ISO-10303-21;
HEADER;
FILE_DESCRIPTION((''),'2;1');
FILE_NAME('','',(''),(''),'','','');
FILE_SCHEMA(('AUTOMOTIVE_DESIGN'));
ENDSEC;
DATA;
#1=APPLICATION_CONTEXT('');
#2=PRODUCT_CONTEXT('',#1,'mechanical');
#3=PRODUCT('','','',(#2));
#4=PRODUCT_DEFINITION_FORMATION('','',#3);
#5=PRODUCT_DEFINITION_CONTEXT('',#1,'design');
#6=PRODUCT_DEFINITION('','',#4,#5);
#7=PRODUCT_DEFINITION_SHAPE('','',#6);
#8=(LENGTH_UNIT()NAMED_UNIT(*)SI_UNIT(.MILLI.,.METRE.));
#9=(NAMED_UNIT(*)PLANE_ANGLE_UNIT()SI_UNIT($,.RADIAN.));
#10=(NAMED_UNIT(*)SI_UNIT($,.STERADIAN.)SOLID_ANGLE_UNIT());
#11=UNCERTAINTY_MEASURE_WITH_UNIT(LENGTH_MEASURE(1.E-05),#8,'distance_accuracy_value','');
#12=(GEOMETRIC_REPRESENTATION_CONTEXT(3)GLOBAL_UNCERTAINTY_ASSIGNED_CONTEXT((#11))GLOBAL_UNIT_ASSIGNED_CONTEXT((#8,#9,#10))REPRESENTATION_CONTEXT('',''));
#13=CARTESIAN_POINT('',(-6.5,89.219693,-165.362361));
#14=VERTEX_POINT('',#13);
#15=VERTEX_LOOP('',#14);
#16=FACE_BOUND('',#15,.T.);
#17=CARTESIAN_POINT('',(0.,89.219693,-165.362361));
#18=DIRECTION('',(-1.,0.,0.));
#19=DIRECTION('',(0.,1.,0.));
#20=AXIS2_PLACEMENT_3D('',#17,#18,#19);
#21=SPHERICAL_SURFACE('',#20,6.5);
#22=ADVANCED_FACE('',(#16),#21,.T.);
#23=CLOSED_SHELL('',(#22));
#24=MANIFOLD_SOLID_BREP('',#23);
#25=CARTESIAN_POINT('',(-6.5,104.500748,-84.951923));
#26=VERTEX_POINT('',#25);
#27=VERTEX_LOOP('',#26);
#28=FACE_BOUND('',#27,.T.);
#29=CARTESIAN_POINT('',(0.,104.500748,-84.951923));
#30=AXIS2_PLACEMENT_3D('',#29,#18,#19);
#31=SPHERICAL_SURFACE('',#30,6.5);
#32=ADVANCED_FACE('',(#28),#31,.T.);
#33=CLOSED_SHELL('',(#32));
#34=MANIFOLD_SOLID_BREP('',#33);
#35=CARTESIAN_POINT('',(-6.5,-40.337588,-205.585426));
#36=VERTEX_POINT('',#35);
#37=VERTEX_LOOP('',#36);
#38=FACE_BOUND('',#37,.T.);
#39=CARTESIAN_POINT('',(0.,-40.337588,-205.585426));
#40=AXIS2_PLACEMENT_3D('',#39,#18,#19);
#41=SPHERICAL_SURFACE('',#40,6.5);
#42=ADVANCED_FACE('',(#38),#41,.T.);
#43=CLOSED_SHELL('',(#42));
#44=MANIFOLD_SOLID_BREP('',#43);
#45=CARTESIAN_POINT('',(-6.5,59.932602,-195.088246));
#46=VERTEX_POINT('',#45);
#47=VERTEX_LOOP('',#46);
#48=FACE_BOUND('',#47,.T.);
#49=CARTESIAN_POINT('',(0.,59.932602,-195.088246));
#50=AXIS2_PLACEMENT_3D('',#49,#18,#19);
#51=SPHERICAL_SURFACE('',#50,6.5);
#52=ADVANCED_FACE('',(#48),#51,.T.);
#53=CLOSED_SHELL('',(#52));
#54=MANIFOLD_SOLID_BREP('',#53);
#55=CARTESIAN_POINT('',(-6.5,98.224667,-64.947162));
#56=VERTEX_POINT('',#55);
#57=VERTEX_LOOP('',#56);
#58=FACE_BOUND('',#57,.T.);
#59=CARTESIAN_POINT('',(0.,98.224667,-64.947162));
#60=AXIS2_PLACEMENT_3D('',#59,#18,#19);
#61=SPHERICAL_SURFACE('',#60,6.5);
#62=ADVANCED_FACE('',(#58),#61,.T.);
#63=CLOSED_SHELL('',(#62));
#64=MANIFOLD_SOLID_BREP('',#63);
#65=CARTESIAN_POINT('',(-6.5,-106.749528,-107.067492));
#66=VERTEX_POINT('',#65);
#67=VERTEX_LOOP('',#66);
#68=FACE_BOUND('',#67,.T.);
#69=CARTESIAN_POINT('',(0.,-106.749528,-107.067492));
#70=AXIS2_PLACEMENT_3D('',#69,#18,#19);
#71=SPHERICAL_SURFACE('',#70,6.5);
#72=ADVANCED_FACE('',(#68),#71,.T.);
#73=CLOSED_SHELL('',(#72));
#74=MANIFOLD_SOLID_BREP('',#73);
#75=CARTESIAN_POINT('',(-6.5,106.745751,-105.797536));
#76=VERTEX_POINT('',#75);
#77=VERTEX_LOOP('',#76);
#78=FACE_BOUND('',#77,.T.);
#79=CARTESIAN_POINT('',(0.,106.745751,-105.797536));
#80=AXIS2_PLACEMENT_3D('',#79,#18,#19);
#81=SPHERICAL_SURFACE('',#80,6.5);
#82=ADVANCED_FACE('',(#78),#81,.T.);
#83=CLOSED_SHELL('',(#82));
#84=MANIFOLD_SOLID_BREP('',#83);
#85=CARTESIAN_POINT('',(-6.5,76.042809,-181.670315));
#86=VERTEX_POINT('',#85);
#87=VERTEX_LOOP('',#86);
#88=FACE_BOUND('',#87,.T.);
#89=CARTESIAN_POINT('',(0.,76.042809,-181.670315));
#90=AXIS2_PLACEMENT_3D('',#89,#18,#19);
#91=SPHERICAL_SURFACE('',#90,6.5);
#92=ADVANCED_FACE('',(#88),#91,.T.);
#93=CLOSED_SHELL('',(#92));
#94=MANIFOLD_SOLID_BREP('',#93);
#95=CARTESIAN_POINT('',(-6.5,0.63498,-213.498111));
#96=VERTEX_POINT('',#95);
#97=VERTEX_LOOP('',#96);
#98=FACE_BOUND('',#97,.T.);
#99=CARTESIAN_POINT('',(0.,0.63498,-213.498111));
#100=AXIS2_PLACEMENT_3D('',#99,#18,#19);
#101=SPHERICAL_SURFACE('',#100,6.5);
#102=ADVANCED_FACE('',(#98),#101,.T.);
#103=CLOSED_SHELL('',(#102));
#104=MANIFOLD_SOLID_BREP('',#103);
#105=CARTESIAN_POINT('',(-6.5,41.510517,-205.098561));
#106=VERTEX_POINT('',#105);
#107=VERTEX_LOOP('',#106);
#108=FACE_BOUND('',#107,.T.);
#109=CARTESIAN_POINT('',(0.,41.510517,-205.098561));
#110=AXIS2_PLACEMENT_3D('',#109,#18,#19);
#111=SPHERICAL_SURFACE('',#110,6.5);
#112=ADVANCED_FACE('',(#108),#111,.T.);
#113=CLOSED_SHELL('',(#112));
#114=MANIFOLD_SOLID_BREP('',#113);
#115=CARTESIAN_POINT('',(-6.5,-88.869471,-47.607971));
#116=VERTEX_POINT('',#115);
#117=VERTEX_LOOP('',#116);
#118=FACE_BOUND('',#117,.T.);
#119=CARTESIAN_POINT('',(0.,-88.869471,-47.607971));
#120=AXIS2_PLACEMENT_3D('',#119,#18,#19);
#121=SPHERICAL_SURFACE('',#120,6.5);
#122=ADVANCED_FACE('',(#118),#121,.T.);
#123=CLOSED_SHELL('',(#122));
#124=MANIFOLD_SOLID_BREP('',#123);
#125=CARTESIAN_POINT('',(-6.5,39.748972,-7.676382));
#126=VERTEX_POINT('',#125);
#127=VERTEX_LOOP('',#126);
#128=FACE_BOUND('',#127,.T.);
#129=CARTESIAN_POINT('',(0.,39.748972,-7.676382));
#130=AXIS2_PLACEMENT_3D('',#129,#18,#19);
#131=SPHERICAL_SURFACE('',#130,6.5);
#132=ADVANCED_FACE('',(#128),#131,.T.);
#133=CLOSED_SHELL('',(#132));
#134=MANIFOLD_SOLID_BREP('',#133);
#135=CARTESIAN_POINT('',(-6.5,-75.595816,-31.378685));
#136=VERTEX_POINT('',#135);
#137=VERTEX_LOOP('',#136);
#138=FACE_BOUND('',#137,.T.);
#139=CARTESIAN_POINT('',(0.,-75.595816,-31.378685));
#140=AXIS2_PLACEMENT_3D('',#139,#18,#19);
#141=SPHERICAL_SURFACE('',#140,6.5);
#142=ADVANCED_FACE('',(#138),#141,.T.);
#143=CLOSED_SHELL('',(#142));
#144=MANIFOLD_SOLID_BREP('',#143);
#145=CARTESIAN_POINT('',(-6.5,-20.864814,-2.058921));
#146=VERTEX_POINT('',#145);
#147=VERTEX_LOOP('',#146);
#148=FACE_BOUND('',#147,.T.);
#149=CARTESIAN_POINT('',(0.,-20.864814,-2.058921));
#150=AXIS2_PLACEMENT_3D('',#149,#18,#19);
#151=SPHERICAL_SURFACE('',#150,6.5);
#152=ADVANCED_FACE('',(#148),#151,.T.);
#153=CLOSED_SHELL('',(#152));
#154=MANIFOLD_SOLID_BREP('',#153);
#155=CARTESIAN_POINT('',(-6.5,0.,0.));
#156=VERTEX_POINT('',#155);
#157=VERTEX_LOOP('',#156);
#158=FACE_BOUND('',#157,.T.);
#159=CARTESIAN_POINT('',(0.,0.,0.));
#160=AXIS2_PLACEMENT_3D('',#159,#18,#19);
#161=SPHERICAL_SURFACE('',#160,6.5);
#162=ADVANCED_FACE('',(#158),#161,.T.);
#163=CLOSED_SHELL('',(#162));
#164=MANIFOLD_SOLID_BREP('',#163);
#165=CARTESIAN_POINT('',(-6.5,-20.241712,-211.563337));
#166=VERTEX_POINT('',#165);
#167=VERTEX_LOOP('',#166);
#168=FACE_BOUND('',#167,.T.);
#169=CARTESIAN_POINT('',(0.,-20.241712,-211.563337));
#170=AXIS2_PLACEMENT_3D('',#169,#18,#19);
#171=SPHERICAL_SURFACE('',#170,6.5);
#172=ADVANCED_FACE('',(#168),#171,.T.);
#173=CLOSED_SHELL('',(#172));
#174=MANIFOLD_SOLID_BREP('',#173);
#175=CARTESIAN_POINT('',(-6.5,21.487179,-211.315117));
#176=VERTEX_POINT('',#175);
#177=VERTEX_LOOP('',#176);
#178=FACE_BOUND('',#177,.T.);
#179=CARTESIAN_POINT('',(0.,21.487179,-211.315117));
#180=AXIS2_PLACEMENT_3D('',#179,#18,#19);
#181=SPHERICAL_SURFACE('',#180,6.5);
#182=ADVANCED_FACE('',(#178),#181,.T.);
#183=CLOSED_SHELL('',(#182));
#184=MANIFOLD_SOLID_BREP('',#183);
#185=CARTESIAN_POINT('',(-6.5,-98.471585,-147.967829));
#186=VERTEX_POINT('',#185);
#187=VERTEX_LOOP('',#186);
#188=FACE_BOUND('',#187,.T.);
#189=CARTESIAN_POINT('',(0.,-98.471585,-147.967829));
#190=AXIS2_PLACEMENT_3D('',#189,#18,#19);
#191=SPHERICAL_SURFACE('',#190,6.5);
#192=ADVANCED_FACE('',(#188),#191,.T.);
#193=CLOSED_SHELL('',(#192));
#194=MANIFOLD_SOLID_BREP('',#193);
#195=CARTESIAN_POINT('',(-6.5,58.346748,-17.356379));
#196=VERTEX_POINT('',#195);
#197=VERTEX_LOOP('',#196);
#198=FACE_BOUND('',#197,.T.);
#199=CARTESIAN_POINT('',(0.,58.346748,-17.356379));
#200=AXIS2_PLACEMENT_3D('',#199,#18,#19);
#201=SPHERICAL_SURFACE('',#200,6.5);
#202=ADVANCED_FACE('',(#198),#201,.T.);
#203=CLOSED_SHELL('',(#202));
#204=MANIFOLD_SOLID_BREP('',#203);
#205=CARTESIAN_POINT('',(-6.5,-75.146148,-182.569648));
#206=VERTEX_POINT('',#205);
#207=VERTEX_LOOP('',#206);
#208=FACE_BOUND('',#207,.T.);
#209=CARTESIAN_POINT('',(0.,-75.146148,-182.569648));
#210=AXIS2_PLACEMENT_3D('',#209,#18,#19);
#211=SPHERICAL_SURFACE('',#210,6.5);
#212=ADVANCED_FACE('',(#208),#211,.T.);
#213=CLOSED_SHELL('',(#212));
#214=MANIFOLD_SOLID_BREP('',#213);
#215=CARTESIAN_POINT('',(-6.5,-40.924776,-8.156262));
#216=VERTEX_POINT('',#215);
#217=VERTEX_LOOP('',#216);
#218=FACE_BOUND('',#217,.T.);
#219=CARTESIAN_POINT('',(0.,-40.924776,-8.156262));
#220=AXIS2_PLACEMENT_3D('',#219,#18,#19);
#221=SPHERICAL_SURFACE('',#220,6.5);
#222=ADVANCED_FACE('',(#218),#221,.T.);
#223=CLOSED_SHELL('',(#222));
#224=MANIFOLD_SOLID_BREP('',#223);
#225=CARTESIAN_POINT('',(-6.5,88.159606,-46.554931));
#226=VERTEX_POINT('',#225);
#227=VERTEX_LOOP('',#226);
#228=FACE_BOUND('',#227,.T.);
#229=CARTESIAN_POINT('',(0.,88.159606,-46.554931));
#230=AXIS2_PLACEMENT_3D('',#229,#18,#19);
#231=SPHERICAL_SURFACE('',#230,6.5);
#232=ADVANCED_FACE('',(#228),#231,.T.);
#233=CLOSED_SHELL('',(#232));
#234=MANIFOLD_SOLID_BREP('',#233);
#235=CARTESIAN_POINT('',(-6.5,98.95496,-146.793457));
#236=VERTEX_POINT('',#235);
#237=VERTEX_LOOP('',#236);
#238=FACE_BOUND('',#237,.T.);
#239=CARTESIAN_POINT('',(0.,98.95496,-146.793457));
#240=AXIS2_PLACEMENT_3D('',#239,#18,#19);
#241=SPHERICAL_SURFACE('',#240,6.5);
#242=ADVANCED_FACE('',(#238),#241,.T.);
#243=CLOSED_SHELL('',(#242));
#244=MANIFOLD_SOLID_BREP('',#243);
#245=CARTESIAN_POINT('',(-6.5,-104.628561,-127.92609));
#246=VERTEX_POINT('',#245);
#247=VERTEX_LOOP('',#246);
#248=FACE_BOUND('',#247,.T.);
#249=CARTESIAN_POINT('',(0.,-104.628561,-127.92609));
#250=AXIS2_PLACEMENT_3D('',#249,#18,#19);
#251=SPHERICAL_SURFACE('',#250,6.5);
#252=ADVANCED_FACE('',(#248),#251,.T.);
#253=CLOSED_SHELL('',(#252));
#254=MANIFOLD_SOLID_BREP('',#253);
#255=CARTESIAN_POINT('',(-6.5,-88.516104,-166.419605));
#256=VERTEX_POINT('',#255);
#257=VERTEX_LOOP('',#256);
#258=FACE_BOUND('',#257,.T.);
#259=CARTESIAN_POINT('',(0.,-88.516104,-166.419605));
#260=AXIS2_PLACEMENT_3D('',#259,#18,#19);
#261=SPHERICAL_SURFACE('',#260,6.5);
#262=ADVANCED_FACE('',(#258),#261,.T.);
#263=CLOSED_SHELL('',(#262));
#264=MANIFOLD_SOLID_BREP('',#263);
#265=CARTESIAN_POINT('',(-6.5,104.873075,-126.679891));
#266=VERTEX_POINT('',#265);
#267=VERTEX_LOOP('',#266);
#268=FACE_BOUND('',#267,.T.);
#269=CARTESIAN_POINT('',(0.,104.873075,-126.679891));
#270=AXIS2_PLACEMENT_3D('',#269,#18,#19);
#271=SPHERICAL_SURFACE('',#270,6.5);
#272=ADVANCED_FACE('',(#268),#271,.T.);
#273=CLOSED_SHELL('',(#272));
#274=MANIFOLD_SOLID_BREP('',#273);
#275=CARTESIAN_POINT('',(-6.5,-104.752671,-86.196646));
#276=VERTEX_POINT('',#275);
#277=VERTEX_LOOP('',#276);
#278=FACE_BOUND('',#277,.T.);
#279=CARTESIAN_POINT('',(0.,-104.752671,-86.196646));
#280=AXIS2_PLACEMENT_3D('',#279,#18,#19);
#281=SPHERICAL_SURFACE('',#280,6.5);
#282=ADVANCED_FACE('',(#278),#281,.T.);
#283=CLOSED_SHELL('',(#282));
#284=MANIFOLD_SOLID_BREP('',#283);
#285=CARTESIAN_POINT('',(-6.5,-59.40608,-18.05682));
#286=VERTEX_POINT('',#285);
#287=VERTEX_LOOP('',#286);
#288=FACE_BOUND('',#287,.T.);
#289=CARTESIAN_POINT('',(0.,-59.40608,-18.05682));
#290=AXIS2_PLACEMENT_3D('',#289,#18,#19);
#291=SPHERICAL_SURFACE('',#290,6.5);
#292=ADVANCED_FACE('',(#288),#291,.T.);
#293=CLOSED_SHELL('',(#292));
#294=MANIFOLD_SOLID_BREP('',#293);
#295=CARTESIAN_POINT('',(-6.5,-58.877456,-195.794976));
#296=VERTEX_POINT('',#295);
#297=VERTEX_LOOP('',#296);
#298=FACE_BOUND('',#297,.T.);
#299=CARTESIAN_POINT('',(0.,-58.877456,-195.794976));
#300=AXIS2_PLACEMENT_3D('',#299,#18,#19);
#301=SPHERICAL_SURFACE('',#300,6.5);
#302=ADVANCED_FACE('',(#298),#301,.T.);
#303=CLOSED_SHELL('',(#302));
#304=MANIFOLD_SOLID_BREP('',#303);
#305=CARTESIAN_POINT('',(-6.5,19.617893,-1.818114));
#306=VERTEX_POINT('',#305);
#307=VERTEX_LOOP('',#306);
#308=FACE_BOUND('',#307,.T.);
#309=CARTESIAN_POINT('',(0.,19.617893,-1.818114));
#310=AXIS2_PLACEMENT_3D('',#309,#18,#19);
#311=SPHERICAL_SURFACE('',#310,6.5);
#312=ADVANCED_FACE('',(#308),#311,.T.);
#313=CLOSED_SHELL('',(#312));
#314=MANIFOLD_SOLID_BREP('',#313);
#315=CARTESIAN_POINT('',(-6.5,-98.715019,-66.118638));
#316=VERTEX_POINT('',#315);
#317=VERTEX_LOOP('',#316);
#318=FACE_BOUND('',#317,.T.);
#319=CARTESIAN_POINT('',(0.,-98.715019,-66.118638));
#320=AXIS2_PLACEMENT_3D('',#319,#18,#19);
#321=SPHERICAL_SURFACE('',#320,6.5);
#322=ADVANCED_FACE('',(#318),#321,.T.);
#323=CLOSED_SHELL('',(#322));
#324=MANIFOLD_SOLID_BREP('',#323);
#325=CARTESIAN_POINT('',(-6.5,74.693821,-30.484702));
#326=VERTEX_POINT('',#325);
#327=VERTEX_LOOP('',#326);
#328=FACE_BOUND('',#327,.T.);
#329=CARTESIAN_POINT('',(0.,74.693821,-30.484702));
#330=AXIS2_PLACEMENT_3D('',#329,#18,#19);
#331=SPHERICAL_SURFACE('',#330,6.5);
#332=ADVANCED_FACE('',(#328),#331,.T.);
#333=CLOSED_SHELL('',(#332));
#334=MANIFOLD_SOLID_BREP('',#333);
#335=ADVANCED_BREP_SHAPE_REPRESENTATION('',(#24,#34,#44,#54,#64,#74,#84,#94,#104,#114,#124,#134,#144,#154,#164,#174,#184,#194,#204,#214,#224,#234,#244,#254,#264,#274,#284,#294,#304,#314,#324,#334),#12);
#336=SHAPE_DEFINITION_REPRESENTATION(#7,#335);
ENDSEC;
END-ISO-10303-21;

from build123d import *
from build123d.topology import SkipClean


with BuildPart() as part:
    # Sketch1 → Revolve1 (revolve)
    with SkipClean():  # the faces are left unmerged after this step: merging them gives an invalid solid
        with BuildSketch(Plane.XY):
            with BuildLine():
                ThreePointArc((6.5, 0), (0, 6.5), (-6.5, 0))
                Line((-6.5, 0), (6.5, 0))
            make_face()
            with BuildLine():
                Line((6.5, 0), (-6.5, 0))
                ThreePointArc((-6.5, 0), (0, -6.5), (6.5, 0))
            make_face()
        revolve(axis=Axis((-6.5, 0, 0), (1, 0, 0)))
    add(part.part.scale(1), mode=Mode.REPLACE)  # the faces are merged on a copy


with BuildPart() as body_2:
    # CrvPattern1: read off the stored shape, not the designer's step
    # CrvPattern1: copy of part
    add(part.part.moved(Location((0, 19.6178931, -1.8181137))))


with BuildPart() as body_3:
    # CrvPattern1 2: copy of part
    add(part.part.moved(Location((0, 39.7489717, -7.6763822))))


with BuildPart() as body_4:
    # CrvPattern1 3: copy of part
    add(part.part.moved(Location((0, 58.3467483, -17.3563791))))


with BuildPart() as body_5:
    # CrvPattern1 4: copy of part
    add(part.part.moved(Location((0, 74.6938205, -30.484702))))


with BuildPart() as body_6:
    # CrvPattern1 5: copy of part
    add(part.part.moved(Location((0, 88.1596061, -46.5549309))))


with BuildPart() as body_7:
    # CrvPattern1 6: copy of part
    add(part.part.moved(Location((0, 98.2246673, -64.9471623))))


with BuildPart() as body_8:
    # CrvPattern1 7: copy of part
    add(part.part.moved(Location((0, 104.500748, -84.9519229))))


with BuildPart() as body_9:
    # CrvPattern1 8: copy of part
    add(part.part.moved(Location((0, 106.7457508, -105.7975363))))


with BuildPart() as body_10:
    # CrvPattern1 9: copy of part
    add(part.part.moved(Location((0, 104.8730755, -126.6798906))))


with BuildPart() as body_11:
    # CrvPattern1 10: copy of part
    add(part.part.moved(Location((0, 98.9549598, -146.7934567))))


with BuildPart() as body_12:
    # CrvPattern1 11: copy of part
    add(part.part.moved(Location((0, 89.219693, -165.3623612))))


with BuildPart() as body_13:
    # CrvPattern1 12: copy of part
    add(part.part.moved(Location((0, 76.0428092, -181.6703154))))


with BuildPart() as body_14:
    # CrvPattern1 13: copy of part
    add(part.part.moved(Location((0, 59.9326021, -195.088246))))


with BuildPart() as body_15:
    # CrvPattern1 14: copy of part
    add(part.part.moved(Location((0, 41.5105168, -205.0985612))))


with BuildPart() as body_16:
    # CrvPattern1 15: copy of part
    add(part.part.moved(Location((0, 21.4871787, -211.3151168))))


with BuildPart() as body_17:
    # CrvPattern1 16: copy of part
    add(part.part.moved(Location((0, 0.6349805, -213.4981115))))


with BuildPart() as body_18:
    # CrvPattern1 17: copy of part
    add(part.part.moved(Location((0, -20.2417118, -211.5633369))))


with BuildPart() as body_19:
    # CrvPattern1 18: copy of part
    add(part.part.moved(Location((0, -40.3375876, -205.5854265))))


with BuildPart() as body_20:
    # CrvPattern1 19: copy of part
    add(part.part.moved(Location((0, -58.8774557, -195.7949758))))


with BuildPart() as body_21:
    # CrvPattern1 20: copy of part
    add(part.part.moved(Location((0, -75.1461476, -182.5696479))))


with BuildPart() as body_22:
    # CrvPattern1 21: copy of part
    add(part.part.moved(Location((0, -88.5161045, -166.4196049))))


with BuildPart() as body_23:
    # CrvPattern1 22: copy of part
    add(part.part.moved(Location((0, -98.4715852, -147.9678288))))


with BuildPart() as body_24:
    # CrvPattern1 23: copy of part
    add(part.part.moved(Location((0, -104.6285607, -127.9260902))))


with BuildPart() as body_25:
    # CrvPattern1 24: copy of part
    add(part.part.moved(Location((0, -106.7495279, -107.0674916))))


with BuildPart() as body_26:
    # CrvPattern1 25: copy of part
    add(part.part.moved(Location((0, -104.7526713, -86.196646))))


with BuildPart() as body_27:
    # CrvPattern1 26: copy of part
    add(part.part.moved(Location((0, -98.7150189, -66.1186384))))


with BuildPart() as body_28:
    # CrvPattern1 27: copy of part
    add(part.part.moved(Location((0, -88.8694709, -47.6079706))))


with BuildPart() as body_29:
    # CrvPattern1 28: copy of part
    add(part.part.moved(Location((0, -75.5958158, -31.3786849))))


with BuildPart() as body_30:
    # CrvPattern1 29: copy of part
    add(part.part.moved(Location((0, -59.4060799, -18.05682))))


with BuildPart() as body_31:
    # CrvPattern1 30: copy of part
    add(part.part.moved(Location((0, -40.9247762, -8.1562619))))


with BuildPart() as body_32:
    # CrvPattern1 31: copy of part
    add(part.part.moved(Location((0, -20.8648144, -2.058921))))


solid = Compound([part.part, body_2.part, body_3.part, body_4.part, body_5.part, body_6.part, body_7.part, body_8.part, body_9.part, body_10.part, body_11.part, body_12.part, body_13.part, body_14.part, body_15.part, body_16.part, body_17.part, body_18.part, body_19.part, body_20.part, body_21.part, body_22.part, body_23.part, body_24.part, body_25.part, body_26.part, body_27.part, body_28.part, body_29.part, body_30.part, body_31.part, body_32.part])
